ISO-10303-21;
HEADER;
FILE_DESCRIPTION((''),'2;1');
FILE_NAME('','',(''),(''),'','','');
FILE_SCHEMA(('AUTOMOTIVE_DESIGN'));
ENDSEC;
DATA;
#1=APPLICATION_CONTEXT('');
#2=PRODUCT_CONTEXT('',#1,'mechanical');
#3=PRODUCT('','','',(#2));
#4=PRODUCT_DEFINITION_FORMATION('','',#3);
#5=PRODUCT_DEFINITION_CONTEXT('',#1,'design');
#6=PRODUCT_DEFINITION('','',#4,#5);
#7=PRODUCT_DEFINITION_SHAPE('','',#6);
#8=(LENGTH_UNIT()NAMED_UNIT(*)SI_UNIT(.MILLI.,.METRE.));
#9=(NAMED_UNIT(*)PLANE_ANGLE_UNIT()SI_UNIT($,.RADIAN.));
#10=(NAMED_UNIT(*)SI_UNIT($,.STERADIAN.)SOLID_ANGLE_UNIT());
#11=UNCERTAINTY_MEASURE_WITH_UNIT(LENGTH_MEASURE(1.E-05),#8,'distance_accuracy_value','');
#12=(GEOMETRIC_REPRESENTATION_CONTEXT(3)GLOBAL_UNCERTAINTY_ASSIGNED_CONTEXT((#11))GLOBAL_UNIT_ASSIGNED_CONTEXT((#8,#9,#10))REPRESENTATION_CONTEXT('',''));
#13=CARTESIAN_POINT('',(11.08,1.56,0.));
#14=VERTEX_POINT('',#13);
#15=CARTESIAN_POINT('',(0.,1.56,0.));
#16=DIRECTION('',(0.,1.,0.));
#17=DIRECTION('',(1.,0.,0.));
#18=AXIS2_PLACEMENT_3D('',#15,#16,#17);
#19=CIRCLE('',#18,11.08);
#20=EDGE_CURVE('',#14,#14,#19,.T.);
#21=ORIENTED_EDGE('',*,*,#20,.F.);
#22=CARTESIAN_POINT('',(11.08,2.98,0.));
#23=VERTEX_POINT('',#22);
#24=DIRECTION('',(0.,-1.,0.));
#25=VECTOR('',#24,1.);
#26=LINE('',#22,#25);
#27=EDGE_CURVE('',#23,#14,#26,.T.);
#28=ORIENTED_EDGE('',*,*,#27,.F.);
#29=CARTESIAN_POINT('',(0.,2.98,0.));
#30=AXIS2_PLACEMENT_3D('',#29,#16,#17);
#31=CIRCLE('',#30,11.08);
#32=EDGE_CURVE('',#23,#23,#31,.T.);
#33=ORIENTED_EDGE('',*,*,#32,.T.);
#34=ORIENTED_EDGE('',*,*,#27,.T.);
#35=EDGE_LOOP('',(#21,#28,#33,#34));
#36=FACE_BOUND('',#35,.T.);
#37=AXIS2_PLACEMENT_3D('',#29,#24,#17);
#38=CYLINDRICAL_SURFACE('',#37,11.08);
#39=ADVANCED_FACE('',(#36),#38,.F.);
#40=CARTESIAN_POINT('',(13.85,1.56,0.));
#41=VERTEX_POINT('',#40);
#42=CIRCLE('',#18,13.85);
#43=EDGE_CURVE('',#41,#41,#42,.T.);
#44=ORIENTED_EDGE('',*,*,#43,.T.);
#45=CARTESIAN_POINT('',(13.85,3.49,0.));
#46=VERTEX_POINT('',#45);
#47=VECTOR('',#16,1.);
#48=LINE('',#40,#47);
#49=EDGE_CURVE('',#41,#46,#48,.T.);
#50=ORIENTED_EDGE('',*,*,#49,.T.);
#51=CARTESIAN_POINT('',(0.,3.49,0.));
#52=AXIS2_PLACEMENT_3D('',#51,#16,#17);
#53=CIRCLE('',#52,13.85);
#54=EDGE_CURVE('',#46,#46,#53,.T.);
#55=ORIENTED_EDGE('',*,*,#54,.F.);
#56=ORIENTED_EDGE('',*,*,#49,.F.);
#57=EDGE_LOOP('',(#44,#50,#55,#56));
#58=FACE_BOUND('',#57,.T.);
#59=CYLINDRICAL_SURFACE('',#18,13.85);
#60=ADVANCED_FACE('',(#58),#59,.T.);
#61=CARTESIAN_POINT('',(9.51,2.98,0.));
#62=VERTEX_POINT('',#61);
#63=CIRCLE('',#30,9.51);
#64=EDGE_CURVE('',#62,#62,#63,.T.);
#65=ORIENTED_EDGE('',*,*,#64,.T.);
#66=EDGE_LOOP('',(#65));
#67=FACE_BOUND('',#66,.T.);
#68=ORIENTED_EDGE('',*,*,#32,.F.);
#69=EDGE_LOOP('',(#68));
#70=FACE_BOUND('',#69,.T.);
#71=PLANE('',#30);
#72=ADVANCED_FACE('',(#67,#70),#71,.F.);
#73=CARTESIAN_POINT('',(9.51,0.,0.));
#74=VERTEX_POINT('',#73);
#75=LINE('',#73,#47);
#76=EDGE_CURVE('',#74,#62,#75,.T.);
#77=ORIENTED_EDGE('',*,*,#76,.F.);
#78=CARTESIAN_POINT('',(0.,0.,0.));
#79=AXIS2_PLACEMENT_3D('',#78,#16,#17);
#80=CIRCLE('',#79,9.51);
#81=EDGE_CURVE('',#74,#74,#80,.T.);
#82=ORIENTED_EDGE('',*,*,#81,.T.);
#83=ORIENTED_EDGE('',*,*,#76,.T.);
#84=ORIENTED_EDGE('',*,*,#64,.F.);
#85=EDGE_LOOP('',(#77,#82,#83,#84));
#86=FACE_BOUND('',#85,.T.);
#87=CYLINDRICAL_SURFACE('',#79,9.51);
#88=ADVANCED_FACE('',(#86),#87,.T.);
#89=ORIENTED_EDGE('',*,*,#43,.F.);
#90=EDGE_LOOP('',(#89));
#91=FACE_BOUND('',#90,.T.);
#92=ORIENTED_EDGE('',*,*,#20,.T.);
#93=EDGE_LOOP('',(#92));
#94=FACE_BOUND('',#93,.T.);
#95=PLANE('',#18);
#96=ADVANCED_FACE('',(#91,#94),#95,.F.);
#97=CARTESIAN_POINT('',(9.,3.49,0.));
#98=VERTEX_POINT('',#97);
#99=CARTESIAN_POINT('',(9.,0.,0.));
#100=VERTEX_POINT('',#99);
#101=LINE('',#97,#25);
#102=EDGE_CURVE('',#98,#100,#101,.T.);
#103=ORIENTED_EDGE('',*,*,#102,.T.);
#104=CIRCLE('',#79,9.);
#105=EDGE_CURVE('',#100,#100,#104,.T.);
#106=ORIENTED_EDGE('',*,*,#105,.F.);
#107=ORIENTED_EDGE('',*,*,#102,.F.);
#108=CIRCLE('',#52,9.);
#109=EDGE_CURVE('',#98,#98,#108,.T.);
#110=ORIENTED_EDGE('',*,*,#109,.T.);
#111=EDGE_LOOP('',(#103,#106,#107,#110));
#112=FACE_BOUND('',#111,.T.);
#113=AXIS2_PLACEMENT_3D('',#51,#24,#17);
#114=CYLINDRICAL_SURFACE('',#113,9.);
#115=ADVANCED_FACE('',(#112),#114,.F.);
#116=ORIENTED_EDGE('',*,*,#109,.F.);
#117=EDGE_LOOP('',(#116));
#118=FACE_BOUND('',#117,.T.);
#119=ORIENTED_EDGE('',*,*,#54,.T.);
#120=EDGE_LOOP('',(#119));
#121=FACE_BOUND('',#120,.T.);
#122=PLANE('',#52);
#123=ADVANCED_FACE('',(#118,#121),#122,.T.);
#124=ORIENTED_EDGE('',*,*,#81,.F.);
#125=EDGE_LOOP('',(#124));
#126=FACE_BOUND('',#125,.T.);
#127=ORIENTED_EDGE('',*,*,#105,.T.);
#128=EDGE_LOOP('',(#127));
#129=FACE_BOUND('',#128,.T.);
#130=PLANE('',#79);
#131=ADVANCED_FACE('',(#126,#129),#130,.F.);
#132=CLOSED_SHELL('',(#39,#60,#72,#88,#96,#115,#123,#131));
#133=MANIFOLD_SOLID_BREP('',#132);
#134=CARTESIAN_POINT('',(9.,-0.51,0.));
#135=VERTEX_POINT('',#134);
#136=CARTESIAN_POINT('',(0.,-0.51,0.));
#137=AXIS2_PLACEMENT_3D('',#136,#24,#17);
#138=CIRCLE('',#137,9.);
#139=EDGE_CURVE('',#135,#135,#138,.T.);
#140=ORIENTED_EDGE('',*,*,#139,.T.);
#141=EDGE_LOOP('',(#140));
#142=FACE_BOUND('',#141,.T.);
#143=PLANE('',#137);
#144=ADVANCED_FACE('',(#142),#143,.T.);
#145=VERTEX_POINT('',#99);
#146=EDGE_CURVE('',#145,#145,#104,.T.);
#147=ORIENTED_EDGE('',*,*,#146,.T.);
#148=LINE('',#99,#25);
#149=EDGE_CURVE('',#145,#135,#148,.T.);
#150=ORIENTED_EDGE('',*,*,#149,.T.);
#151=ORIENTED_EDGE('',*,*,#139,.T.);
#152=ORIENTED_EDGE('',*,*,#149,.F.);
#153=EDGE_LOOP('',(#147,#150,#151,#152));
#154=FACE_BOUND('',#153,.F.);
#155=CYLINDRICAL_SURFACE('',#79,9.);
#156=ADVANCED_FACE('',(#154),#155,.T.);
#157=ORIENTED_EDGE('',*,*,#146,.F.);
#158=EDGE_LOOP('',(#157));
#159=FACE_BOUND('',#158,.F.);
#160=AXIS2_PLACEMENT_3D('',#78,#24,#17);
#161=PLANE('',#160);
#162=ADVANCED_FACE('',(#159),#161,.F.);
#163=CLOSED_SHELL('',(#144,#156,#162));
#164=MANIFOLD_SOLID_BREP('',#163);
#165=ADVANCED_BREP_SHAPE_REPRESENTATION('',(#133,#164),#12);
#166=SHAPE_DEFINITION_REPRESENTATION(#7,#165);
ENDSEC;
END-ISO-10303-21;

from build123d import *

# Parameters (mm, degrees)
F0_W     = 1.57
F0_H     = 0.51
F3_R     = 9
F4_DEPTH = 0.51


# Not quite as in the source:
# - the program builds the solid bodies; features that only make, move or delete a surface that nothing else refers to are left out


with BuildPart() as f1:
    # F0 (on Top) → F1 (revolve)
    with BuildSketch(Plane.XY):
        Polygon((9, 3.49), (9, 0), (9.51, 0), (9.51, 2.98), (9.51, 3.49), align=None)
        with Locations((10.295, 3.235)):
            Rectangle(F0_W, F0_H)
        Polygon((13.85, 3.49), (11.08, 3.49), (11.08, 2.98), (11.08, 1.56), (13.85, 1.56), align=None)
    revolve(axis=Axis((0, 1.745, 0), (0, 1, 0)))

    # F3 (on offset) → F4 (join)
    with BuildSketch(Plane.XZ):
        Circle(F3_R)
    extrude(amount=F4_DEPTH)


solid = f1.part
